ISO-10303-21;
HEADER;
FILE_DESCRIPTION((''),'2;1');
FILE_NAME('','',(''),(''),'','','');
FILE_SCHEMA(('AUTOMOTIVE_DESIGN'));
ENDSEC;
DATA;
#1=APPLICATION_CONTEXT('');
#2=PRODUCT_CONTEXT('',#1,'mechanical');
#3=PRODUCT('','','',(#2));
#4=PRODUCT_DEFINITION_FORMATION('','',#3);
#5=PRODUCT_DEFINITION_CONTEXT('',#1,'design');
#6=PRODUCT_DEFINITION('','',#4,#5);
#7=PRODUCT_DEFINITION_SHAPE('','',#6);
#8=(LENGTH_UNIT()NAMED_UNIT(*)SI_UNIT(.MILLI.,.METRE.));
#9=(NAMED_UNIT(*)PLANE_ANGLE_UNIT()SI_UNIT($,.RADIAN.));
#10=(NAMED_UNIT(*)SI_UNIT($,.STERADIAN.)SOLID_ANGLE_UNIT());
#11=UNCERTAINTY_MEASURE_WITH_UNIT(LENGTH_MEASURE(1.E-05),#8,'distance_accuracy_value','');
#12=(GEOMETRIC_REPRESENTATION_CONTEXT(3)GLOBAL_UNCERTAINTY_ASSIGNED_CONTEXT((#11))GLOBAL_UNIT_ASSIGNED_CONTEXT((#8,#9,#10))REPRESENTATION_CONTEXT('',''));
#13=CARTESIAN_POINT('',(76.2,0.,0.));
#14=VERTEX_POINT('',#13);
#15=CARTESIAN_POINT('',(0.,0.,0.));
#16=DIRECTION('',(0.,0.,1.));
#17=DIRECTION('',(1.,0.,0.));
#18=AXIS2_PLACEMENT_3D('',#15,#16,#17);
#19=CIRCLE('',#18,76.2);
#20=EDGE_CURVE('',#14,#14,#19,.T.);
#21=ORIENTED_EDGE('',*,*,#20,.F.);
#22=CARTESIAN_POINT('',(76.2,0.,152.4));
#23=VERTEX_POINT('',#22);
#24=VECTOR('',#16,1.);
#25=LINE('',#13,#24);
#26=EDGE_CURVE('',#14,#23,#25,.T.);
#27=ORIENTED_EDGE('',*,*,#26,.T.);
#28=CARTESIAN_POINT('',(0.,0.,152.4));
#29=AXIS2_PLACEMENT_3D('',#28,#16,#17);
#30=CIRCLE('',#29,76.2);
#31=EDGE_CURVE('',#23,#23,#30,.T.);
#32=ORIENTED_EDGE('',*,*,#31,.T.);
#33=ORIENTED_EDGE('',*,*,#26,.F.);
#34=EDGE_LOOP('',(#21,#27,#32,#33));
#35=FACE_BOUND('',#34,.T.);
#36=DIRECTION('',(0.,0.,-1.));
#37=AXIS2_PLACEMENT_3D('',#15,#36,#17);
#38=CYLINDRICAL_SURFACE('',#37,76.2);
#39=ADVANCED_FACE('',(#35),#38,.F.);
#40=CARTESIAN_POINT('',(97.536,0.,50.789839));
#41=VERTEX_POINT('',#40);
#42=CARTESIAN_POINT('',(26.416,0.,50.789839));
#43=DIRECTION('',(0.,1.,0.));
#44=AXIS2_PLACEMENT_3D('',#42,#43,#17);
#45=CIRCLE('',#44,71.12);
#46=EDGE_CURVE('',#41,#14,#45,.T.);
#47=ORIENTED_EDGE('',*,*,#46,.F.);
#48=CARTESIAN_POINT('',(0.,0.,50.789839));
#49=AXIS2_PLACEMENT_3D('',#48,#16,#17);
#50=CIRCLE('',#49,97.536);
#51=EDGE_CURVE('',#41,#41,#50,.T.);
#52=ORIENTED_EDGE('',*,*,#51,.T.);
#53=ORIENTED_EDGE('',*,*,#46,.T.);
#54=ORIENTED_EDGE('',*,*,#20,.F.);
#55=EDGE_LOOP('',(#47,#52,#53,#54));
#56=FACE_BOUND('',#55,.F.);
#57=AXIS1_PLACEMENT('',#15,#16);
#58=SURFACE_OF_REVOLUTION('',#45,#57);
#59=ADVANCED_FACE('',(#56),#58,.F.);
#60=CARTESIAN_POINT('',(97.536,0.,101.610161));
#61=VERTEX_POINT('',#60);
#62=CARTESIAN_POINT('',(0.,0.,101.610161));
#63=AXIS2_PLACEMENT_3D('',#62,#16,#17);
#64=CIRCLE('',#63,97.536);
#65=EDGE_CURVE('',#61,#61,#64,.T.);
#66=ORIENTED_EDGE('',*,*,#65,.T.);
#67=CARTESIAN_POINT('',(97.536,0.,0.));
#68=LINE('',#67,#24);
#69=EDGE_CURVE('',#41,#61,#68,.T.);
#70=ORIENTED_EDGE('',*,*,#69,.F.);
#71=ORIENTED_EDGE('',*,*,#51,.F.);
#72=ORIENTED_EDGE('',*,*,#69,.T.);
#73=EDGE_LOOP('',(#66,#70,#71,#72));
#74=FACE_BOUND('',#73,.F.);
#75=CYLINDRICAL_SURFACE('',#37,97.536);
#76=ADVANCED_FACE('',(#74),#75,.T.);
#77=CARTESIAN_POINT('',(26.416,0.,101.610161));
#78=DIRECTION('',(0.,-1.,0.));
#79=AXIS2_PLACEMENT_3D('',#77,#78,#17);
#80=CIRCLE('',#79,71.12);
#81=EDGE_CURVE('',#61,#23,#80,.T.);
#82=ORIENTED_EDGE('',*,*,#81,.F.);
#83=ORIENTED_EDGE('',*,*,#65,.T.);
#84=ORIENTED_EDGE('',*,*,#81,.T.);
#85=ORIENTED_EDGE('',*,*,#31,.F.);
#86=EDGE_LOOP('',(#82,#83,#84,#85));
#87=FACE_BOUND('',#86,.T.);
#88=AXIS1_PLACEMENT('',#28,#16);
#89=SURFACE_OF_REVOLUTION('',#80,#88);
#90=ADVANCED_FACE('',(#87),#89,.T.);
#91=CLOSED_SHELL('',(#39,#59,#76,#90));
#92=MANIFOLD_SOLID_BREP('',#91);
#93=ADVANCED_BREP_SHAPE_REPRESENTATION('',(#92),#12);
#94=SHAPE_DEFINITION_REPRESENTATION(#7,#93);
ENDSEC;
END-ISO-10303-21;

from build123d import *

# Parameters (mm, degrees)
F0_R     = 97.536
F0_R_2   = 76.2
F1_DEPTH = 152.4


# Not quite as in the source:
# - a fillet or chamfer that OpenCascade refuses, or shapes differently, is made with other operations: its cross-section is extruded or revolved along the edge and cut away or added


with BuildPart() as f1:
    # F0 (on Top) → F1 (new body)
    with BuildSketch(Plane.XY):
        Circle(F0_R)
        Circle(F0_R_2, mode=Mode.SUBTRACT)
    extrude(amount=F1_DEPTH)

    # F2: fillet of radius 71.12 on 1 edges, made by hand

    # F2_s1 → F2_t2 (revolve, cut)
    with BuildSketch(Plane.XZ):
        with BuildLine():
            ThreePointArc((97.536, 101.6101610162), (91.9854001803, 129.1548185744), (76.2, 152.4))
            Line((76.2, 152.4), (97.536, 152.4))
            Line((97.536, 152.4), (97.536, 101.6101610162))
        make_face()
    revolve(axis=Axis((0, 0, 152.4), (0, 0, 1)), mode=Mode.SUBTRACT)

    # F3: fillet of radius 71.12 on 3 edges, made by hand

    # F3_s1 → F3_t2 (revolve, cut)
    with BuildSketch(Plane.XZ):
        with BuildLine():
            ThreePointArc((97.536, 50.7898389838), (91.9854001803, 23.2451814256), (76.2, 0))
            Line((76.2, 0), (97.536, 0))
            Line((97.536, 0), (97.536, 50.7898389838))
        make_face()
    revolve(axis=Axis((0, 0, 0), (0, 0, 1)), mode=Mode.SUBTRACT)


solid = f1.part
